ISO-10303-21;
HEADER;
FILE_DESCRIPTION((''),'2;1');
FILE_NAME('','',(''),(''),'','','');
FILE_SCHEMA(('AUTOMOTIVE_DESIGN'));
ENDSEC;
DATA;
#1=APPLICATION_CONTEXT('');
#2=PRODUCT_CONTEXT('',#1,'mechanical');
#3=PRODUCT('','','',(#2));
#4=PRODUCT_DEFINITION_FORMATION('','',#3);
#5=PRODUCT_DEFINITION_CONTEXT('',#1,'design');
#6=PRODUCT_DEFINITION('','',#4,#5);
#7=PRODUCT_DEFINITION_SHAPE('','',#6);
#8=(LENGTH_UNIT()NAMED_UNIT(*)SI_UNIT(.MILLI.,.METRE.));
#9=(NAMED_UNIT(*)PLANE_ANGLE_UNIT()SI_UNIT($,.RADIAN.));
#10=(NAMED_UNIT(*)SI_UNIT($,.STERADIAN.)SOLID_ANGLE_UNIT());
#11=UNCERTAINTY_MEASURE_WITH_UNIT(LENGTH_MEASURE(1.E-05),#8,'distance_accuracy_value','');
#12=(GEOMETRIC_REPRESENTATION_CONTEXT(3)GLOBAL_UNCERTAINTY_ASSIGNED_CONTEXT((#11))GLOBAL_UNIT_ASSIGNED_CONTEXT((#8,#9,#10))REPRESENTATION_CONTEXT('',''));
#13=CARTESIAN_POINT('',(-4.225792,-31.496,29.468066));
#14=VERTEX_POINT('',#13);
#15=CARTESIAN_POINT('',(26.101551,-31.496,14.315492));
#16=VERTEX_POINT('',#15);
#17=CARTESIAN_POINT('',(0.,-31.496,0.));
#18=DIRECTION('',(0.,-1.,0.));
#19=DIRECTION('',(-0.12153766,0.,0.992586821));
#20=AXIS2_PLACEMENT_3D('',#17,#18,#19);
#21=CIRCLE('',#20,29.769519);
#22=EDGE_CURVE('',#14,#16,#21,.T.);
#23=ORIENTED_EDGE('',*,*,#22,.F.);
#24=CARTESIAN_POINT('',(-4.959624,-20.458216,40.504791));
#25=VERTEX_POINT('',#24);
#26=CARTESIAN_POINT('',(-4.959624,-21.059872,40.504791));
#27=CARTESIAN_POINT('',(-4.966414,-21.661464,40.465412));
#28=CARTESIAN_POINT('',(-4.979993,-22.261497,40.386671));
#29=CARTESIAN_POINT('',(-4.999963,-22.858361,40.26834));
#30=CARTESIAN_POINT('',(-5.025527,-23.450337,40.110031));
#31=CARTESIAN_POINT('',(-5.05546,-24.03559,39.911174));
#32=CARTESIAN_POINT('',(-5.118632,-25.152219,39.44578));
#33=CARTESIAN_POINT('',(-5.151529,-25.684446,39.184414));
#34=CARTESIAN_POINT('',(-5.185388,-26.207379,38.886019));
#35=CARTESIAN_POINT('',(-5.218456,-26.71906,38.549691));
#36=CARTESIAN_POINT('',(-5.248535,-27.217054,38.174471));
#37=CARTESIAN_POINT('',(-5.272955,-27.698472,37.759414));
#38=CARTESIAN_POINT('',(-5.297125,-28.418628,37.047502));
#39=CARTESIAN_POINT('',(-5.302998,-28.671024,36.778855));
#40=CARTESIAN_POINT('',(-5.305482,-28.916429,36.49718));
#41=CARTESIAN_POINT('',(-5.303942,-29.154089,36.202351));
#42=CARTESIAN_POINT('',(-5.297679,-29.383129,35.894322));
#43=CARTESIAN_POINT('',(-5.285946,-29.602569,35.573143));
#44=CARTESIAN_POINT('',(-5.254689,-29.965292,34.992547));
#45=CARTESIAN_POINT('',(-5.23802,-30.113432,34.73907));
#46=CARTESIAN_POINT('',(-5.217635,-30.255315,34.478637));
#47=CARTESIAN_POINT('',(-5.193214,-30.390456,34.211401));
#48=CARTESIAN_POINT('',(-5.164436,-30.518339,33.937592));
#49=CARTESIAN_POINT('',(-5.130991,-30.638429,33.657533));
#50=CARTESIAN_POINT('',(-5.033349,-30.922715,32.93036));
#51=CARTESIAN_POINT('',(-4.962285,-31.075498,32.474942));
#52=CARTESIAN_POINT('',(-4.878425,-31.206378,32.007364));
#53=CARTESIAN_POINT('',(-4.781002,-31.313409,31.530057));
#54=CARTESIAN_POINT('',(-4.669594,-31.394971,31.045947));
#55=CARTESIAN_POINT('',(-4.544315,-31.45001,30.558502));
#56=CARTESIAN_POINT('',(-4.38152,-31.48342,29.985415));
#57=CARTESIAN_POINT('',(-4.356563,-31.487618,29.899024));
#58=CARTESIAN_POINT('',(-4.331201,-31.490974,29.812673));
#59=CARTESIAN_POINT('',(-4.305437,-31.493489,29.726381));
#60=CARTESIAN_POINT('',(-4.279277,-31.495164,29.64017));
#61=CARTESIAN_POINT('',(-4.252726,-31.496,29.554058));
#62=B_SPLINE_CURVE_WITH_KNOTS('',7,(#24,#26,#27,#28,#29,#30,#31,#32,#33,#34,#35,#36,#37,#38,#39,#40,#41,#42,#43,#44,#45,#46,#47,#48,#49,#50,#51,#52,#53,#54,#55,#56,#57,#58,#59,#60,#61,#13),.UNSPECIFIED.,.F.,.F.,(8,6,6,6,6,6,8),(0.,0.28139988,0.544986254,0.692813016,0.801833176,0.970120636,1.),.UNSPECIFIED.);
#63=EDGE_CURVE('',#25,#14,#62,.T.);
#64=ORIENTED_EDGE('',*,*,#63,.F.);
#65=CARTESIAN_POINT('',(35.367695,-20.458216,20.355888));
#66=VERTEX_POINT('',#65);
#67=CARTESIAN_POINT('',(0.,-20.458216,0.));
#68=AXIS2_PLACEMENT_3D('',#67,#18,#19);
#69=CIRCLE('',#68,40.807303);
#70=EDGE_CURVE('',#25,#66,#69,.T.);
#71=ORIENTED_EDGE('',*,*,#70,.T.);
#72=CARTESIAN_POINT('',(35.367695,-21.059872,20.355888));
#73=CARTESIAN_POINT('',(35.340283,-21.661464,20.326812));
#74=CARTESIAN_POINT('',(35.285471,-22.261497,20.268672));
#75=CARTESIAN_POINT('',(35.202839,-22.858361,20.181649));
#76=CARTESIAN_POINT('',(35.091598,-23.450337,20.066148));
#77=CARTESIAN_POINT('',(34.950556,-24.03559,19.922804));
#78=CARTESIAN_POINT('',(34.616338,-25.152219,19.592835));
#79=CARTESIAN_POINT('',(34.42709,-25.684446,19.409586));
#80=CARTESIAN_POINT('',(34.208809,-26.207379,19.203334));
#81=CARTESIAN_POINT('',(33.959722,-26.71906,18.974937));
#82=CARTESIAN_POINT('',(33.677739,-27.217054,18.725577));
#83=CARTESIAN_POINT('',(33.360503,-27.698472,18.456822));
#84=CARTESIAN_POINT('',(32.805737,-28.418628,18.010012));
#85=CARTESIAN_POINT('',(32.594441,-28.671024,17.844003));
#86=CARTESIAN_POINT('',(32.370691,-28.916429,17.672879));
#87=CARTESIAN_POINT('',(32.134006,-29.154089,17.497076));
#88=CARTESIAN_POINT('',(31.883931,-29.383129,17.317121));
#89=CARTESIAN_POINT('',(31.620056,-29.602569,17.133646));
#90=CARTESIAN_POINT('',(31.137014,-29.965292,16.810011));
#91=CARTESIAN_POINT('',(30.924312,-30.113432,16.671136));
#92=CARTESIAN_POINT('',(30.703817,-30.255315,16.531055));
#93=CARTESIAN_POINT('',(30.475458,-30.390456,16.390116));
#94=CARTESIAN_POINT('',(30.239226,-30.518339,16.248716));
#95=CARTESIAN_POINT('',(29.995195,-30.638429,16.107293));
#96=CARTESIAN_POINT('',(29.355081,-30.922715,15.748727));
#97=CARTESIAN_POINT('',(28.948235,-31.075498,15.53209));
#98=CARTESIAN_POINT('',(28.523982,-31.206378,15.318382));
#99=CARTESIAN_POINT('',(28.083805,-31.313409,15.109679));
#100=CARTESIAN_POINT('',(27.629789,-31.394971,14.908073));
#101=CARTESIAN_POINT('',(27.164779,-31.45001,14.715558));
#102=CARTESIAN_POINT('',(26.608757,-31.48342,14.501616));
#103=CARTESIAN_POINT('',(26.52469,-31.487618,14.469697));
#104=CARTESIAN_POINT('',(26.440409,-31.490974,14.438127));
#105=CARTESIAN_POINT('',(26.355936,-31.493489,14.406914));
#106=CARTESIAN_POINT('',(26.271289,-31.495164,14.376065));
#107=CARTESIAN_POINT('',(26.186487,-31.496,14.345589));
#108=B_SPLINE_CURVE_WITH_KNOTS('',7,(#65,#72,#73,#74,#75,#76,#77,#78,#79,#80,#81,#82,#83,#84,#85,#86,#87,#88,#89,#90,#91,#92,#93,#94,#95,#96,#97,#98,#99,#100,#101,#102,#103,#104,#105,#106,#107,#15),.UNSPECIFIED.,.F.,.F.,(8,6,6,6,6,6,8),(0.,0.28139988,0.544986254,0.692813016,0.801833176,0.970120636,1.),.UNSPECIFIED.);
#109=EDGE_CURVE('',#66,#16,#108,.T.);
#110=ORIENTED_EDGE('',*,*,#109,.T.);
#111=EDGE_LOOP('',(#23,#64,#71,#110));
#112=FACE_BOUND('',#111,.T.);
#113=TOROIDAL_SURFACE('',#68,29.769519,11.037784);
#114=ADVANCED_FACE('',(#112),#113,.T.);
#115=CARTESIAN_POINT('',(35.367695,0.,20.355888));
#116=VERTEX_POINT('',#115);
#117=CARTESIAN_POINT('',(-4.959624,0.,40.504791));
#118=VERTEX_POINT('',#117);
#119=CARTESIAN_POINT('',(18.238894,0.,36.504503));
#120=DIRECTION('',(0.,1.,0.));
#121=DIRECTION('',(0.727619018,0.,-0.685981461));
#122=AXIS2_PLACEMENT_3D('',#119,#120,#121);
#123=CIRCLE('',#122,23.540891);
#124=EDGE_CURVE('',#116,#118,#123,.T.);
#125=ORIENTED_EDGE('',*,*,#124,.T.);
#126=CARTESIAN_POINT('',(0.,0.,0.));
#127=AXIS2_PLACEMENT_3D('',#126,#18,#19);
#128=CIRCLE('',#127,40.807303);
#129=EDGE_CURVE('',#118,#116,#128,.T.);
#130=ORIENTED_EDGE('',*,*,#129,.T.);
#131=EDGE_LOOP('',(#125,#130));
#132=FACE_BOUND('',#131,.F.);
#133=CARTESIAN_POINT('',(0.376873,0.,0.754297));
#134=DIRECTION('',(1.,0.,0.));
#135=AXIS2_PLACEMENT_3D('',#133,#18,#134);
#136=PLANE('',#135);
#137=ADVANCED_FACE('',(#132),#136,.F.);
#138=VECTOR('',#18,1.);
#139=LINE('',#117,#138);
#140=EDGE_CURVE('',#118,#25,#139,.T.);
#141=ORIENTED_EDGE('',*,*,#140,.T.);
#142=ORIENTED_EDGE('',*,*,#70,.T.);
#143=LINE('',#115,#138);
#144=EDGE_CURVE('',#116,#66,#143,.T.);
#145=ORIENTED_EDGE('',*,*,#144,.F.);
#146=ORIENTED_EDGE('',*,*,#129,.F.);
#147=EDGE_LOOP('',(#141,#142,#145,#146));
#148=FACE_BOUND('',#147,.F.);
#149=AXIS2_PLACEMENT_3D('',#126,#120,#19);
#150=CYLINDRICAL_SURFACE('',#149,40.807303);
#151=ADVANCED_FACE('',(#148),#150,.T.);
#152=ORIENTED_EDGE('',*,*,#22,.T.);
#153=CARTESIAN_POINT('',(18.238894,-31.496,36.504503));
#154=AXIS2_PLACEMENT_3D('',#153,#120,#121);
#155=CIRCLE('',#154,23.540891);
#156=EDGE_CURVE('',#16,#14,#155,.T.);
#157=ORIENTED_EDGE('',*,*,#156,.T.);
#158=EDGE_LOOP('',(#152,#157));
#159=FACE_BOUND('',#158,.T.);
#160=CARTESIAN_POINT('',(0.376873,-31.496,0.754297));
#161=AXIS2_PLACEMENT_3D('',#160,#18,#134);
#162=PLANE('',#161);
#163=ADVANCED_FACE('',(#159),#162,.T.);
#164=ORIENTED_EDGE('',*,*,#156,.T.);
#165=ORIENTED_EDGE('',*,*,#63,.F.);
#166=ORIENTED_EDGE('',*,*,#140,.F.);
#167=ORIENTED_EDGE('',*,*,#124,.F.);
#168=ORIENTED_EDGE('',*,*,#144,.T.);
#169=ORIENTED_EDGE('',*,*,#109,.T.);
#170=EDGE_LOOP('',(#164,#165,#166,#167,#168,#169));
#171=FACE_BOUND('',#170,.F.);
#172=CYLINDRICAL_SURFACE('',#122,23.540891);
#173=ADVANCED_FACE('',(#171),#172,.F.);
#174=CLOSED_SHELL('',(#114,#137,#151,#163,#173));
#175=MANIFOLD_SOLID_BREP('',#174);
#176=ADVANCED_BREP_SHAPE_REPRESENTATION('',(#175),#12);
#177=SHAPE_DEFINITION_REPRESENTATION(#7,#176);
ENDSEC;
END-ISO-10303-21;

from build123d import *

# Parameters (mm, degrees)
F1_DEPTH = 31.496
F2_R     = 11.0377844072


# Not quite as in the source:
# - the program builds the solid bodies; features that only make, move or delete a surface that nothing else refers to are left out


with BuildPart() as f1:
    # F0 (on Front) → F1 (new body)
    with BuildSketch(Plane.XZ):
        with BuildLine():
            ThreePointArc((35.3676946952, 20.3558876834), (7.7172524441, 15.4458081316), (-4.959624117, 40.5047913221))
            ThreePointArc((-4.959624117, 40.5047913221), (-18.238894389, -36.5045027756), (35.3676946952, 20.3558876834))
        make_face()
    extrude(amount=F1_DEPTH)

    # F2
    f2_edges = [f1.edges().sort_by_distance(p)[0] for p in [
        (-18.238894, -31.496, -36.504503),
    ]]
    fillet(f2_edges, radius=F2_R)


solid = f1.part
